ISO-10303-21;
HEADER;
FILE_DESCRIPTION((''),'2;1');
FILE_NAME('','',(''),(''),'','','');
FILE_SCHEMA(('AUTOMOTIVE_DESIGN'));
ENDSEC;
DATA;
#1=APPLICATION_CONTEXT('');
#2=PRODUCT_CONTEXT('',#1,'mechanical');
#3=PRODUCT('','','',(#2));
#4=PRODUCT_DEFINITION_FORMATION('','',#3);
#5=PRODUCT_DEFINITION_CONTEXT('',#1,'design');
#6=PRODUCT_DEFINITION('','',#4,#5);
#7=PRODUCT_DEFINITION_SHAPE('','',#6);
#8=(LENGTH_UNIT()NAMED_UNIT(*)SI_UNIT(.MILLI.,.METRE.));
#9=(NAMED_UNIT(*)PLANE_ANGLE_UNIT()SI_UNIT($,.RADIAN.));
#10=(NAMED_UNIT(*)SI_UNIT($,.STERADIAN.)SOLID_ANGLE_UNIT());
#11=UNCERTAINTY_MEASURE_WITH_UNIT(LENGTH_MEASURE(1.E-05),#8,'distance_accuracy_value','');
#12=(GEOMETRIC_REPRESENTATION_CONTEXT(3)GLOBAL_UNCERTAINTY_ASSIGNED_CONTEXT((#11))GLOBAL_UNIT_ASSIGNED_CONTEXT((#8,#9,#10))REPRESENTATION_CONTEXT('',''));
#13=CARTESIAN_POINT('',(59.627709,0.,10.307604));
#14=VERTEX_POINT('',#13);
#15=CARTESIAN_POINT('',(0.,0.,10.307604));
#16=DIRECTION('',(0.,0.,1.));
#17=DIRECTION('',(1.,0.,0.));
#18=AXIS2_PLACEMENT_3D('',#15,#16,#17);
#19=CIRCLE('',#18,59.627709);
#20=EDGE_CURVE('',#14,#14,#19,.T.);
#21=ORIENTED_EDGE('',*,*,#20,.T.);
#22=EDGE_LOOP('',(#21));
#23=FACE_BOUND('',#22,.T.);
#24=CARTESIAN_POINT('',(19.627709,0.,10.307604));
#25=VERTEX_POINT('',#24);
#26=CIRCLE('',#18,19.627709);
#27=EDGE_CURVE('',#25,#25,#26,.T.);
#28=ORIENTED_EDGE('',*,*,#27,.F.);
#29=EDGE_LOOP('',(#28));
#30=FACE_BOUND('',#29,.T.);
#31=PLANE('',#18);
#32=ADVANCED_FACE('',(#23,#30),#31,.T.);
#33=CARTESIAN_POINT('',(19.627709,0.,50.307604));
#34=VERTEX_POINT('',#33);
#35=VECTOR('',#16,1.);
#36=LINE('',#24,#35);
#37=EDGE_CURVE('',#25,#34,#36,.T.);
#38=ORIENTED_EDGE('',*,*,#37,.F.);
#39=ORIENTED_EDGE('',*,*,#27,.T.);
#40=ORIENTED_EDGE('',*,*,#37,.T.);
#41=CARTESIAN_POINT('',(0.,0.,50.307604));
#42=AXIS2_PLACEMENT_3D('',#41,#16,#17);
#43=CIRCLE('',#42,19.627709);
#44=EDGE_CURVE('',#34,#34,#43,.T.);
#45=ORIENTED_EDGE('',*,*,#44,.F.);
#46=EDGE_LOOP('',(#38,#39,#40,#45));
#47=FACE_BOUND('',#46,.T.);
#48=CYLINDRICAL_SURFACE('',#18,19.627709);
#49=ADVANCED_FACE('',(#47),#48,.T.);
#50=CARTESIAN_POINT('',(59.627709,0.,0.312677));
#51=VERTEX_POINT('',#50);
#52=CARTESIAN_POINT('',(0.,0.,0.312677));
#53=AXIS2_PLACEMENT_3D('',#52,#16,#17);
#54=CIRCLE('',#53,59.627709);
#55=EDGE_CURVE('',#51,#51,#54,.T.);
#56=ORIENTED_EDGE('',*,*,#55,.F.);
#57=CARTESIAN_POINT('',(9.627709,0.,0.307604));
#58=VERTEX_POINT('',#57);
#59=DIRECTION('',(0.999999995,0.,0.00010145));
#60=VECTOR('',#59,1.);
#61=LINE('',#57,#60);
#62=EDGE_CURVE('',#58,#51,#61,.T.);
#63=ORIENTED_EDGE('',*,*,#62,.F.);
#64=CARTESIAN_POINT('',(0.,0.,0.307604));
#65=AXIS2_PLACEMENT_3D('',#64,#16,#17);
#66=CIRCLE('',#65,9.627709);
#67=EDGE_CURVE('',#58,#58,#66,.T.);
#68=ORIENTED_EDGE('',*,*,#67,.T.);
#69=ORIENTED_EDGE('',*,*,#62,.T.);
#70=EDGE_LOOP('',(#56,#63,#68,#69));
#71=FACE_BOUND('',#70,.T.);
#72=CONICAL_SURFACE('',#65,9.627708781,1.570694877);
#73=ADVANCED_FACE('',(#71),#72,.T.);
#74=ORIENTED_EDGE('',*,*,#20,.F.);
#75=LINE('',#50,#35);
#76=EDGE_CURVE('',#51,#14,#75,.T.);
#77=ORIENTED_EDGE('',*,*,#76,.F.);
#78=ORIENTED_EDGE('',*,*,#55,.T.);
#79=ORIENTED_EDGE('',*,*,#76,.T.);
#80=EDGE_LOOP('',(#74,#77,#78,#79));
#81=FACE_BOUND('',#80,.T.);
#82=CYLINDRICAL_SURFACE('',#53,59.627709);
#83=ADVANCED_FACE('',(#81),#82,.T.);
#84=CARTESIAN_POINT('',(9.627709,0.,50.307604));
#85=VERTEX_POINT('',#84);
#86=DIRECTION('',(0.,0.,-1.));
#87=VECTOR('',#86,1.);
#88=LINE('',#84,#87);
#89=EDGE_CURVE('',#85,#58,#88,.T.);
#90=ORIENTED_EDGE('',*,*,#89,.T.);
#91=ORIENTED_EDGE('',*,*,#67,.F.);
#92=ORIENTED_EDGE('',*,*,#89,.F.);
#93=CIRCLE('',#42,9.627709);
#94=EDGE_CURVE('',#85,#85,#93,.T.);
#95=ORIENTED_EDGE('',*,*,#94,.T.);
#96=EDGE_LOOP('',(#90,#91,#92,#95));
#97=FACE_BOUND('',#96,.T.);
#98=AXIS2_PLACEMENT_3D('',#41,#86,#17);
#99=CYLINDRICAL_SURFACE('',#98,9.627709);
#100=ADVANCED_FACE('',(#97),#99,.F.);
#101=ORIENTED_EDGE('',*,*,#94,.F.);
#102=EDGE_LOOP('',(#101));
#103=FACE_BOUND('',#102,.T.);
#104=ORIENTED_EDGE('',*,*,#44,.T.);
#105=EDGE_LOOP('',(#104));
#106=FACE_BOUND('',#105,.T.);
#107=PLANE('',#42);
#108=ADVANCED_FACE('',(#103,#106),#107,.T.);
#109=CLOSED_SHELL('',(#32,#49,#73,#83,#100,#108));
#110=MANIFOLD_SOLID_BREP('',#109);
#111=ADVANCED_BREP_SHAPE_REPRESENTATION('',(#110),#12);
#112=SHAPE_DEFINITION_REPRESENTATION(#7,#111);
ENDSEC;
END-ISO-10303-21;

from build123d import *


# Not quite as in the source:
# - ends of sketch curves that miss each other by under 0.0002 mm in the source are joined


with BuildPart() as f1:
    # F0 (on Front) → F1 (revolve)
    with BuildSketch(Plane.XZ):
        Polygon((9.6277087807, 50.3076042631), (9.6277087807, 0.3076042631), (59.6277085234, 0.3126767645), (59.6277085234, 10.3076042631), (19.6277087807, 10.3076042631), (19.6277087807, 50.3076042631), align=None)
    revolve(axis=Axis((0, 0, 31.0427118093), (0, 0, 1)))


solid = f1.part
